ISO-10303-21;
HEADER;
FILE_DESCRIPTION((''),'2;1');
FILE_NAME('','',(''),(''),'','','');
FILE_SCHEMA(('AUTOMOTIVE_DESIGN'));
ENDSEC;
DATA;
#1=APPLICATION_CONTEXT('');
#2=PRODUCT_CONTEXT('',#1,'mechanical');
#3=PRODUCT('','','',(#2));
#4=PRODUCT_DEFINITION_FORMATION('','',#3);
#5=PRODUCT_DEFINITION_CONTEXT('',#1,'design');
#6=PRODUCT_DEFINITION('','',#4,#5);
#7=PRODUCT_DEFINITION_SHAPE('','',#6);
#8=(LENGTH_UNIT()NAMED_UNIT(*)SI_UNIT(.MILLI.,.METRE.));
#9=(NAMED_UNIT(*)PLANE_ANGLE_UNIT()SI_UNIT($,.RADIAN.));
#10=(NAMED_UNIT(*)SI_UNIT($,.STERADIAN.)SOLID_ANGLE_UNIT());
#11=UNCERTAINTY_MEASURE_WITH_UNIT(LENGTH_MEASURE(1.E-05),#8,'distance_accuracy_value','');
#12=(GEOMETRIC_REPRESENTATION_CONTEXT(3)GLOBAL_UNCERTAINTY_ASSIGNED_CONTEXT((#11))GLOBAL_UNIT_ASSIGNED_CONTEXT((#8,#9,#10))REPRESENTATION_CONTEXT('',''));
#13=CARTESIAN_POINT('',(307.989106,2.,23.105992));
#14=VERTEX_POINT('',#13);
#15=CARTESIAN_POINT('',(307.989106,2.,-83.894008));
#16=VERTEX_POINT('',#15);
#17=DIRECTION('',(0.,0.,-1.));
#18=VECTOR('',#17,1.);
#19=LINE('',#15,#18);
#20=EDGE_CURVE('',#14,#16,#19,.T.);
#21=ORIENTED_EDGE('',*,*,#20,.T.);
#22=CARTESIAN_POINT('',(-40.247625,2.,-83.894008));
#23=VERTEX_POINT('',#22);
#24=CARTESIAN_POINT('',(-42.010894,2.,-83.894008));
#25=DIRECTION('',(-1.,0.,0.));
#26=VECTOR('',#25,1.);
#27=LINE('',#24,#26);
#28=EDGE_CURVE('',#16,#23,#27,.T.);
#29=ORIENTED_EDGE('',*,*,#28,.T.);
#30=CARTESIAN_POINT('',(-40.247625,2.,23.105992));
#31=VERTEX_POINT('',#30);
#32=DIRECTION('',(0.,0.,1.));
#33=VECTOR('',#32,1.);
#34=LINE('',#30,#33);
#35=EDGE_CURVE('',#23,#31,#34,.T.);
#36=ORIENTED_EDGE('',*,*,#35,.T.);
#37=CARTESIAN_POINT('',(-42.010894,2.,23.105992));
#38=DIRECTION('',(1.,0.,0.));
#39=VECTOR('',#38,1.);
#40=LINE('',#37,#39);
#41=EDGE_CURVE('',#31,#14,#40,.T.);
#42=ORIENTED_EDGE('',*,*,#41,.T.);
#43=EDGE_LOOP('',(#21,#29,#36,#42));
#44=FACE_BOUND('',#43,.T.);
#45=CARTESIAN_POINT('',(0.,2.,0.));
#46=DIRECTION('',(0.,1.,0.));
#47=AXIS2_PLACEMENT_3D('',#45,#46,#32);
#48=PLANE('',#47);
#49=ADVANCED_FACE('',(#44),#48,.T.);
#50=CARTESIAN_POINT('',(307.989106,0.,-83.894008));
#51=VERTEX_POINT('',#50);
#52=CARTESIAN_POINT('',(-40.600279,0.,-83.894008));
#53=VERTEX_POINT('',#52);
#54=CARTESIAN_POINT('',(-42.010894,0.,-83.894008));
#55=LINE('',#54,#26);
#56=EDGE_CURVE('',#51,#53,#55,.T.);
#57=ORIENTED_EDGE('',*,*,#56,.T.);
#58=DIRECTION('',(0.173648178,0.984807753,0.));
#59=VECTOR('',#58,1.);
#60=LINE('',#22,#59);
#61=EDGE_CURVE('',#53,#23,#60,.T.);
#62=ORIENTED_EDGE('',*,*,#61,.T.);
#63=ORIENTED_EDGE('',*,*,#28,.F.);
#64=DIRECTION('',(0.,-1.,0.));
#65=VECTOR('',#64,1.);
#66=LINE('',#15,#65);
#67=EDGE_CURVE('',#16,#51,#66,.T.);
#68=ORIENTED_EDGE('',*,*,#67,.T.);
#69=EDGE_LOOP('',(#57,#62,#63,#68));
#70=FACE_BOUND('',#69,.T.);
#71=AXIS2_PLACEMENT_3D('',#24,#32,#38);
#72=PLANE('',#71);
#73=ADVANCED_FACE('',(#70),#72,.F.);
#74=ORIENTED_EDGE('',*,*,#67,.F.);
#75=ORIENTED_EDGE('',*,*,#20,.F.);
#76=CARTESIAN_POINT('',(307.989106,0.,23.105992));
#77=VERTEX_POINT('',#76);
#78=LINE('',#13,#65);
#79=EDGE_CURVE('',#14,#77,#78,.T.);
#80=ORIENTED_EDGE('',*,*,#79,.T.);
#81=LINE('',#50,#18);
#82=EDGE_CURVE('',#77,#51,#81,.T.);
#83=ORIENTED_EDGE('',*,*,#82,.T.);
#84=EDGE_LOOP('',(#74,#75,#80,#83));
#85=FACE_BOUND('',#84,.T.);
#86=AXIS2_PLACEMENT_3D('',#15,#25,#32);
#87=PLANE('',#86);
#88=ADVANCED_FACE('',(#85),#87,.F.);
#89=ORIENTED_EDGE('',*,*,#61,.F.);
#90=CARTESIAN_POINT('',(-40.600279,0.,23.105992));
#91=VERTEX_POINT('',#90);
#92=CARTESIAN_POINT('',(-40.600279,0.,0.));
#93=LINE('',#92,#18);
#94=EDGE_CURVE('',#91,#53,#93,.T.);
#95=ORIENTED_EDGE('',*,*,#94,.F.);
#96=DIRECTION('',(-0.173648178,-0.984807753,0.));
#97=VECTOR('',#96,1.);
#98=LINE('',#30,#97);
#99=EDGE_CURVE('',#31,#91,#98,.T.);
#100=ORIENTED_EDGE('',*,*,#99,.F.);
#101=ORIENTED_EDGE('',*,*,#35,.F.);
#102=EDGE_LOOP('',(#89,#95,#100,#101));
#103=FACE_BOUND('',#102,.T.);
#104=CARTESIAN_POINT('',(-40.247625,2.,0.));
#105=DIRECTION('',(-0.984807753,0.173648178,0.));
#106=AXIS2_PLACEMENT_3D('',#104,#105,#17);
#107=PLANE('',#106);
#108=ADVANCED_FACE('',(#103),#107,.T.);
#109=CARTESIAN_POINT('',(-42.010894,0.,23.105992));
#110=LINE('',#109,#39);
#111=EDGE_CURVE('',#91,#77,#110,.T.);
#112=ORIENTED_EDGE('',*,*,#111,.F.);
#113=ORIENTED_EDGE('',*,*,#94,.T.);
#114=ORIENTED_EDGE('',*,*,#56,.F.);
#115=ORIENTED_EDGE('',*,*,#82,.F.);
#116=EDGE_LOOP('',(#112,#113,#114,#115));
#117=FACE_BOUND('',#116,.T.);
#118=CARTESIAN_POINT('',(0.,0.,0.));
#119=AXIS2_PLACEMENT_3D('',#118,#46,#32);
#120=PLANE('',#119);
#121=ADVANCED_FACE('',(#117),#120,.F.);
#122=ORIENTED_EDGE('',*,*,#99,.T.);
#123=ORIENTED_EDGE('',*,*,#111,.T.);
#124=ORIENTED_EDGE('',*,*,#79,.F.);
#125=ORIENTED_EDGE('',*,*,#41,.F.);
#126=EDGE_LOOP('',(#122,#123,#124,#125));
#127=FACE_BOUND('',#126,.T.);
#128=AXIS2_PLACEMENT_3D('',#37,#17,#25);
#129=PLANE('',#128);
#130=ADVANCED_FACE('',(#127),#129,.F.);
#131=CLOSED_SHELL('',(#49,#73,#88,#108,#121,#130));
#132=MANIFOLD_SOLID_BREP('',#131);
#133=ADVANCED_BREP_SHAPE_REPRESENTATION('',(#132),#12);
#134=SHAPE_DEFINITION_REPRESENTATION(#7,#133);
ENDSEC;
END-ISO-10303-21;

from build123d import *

# Parameters (mm, degrees)
SKETCH_1_W       = 350
SKETCH_1_H       = 107
EXTRUDE_1_DEPTH  = 2
CHAMFER_1_SIZE   = 10
CHAMFER_1_SIZE_2 = 1.763269807


with BuildPart() as part:
    # 草图1 → 凸台-拉伸1 (new body)
    with BuildSketch(Plane(origin=(0, 0, 0), x_dir=(1, 0, 0), z_dir=(0, 1, 0))):
        with Locations((132.989105515, 30.394008033)):
            Rectangle(SKETCH_1_W, SKETCH_1_H)
    extrude(amount=EXTRUDE_1_DEPTH)

    # 倒角1
    # the kernel refuses this chamfer: 10, 1.763269807 mm, written as the material it takes off along each edge
    with BuildSketch(Plane(origin=(-42.010894485, 2, 49.091379931), x_dir=(-0.006682531656101416, -0.9999776716360547, 0), z_dir=(0, 0, -1))) as chamfer_1_piece_1:
        Polygon((CHAMFER_1_SIZE * 0.999977671636, -CHAMFER_1_SIZE * 0.0066825316561), (-CHAMFER_1_SIZE_2 * 0.00668253165642, -CHAMFER_1_SIZE_2 * 0.999977671684), (0, 0), align=None)
    extrude(amount=158.970775928, mode=Mode.SUBTRACT)


solid = part.part
